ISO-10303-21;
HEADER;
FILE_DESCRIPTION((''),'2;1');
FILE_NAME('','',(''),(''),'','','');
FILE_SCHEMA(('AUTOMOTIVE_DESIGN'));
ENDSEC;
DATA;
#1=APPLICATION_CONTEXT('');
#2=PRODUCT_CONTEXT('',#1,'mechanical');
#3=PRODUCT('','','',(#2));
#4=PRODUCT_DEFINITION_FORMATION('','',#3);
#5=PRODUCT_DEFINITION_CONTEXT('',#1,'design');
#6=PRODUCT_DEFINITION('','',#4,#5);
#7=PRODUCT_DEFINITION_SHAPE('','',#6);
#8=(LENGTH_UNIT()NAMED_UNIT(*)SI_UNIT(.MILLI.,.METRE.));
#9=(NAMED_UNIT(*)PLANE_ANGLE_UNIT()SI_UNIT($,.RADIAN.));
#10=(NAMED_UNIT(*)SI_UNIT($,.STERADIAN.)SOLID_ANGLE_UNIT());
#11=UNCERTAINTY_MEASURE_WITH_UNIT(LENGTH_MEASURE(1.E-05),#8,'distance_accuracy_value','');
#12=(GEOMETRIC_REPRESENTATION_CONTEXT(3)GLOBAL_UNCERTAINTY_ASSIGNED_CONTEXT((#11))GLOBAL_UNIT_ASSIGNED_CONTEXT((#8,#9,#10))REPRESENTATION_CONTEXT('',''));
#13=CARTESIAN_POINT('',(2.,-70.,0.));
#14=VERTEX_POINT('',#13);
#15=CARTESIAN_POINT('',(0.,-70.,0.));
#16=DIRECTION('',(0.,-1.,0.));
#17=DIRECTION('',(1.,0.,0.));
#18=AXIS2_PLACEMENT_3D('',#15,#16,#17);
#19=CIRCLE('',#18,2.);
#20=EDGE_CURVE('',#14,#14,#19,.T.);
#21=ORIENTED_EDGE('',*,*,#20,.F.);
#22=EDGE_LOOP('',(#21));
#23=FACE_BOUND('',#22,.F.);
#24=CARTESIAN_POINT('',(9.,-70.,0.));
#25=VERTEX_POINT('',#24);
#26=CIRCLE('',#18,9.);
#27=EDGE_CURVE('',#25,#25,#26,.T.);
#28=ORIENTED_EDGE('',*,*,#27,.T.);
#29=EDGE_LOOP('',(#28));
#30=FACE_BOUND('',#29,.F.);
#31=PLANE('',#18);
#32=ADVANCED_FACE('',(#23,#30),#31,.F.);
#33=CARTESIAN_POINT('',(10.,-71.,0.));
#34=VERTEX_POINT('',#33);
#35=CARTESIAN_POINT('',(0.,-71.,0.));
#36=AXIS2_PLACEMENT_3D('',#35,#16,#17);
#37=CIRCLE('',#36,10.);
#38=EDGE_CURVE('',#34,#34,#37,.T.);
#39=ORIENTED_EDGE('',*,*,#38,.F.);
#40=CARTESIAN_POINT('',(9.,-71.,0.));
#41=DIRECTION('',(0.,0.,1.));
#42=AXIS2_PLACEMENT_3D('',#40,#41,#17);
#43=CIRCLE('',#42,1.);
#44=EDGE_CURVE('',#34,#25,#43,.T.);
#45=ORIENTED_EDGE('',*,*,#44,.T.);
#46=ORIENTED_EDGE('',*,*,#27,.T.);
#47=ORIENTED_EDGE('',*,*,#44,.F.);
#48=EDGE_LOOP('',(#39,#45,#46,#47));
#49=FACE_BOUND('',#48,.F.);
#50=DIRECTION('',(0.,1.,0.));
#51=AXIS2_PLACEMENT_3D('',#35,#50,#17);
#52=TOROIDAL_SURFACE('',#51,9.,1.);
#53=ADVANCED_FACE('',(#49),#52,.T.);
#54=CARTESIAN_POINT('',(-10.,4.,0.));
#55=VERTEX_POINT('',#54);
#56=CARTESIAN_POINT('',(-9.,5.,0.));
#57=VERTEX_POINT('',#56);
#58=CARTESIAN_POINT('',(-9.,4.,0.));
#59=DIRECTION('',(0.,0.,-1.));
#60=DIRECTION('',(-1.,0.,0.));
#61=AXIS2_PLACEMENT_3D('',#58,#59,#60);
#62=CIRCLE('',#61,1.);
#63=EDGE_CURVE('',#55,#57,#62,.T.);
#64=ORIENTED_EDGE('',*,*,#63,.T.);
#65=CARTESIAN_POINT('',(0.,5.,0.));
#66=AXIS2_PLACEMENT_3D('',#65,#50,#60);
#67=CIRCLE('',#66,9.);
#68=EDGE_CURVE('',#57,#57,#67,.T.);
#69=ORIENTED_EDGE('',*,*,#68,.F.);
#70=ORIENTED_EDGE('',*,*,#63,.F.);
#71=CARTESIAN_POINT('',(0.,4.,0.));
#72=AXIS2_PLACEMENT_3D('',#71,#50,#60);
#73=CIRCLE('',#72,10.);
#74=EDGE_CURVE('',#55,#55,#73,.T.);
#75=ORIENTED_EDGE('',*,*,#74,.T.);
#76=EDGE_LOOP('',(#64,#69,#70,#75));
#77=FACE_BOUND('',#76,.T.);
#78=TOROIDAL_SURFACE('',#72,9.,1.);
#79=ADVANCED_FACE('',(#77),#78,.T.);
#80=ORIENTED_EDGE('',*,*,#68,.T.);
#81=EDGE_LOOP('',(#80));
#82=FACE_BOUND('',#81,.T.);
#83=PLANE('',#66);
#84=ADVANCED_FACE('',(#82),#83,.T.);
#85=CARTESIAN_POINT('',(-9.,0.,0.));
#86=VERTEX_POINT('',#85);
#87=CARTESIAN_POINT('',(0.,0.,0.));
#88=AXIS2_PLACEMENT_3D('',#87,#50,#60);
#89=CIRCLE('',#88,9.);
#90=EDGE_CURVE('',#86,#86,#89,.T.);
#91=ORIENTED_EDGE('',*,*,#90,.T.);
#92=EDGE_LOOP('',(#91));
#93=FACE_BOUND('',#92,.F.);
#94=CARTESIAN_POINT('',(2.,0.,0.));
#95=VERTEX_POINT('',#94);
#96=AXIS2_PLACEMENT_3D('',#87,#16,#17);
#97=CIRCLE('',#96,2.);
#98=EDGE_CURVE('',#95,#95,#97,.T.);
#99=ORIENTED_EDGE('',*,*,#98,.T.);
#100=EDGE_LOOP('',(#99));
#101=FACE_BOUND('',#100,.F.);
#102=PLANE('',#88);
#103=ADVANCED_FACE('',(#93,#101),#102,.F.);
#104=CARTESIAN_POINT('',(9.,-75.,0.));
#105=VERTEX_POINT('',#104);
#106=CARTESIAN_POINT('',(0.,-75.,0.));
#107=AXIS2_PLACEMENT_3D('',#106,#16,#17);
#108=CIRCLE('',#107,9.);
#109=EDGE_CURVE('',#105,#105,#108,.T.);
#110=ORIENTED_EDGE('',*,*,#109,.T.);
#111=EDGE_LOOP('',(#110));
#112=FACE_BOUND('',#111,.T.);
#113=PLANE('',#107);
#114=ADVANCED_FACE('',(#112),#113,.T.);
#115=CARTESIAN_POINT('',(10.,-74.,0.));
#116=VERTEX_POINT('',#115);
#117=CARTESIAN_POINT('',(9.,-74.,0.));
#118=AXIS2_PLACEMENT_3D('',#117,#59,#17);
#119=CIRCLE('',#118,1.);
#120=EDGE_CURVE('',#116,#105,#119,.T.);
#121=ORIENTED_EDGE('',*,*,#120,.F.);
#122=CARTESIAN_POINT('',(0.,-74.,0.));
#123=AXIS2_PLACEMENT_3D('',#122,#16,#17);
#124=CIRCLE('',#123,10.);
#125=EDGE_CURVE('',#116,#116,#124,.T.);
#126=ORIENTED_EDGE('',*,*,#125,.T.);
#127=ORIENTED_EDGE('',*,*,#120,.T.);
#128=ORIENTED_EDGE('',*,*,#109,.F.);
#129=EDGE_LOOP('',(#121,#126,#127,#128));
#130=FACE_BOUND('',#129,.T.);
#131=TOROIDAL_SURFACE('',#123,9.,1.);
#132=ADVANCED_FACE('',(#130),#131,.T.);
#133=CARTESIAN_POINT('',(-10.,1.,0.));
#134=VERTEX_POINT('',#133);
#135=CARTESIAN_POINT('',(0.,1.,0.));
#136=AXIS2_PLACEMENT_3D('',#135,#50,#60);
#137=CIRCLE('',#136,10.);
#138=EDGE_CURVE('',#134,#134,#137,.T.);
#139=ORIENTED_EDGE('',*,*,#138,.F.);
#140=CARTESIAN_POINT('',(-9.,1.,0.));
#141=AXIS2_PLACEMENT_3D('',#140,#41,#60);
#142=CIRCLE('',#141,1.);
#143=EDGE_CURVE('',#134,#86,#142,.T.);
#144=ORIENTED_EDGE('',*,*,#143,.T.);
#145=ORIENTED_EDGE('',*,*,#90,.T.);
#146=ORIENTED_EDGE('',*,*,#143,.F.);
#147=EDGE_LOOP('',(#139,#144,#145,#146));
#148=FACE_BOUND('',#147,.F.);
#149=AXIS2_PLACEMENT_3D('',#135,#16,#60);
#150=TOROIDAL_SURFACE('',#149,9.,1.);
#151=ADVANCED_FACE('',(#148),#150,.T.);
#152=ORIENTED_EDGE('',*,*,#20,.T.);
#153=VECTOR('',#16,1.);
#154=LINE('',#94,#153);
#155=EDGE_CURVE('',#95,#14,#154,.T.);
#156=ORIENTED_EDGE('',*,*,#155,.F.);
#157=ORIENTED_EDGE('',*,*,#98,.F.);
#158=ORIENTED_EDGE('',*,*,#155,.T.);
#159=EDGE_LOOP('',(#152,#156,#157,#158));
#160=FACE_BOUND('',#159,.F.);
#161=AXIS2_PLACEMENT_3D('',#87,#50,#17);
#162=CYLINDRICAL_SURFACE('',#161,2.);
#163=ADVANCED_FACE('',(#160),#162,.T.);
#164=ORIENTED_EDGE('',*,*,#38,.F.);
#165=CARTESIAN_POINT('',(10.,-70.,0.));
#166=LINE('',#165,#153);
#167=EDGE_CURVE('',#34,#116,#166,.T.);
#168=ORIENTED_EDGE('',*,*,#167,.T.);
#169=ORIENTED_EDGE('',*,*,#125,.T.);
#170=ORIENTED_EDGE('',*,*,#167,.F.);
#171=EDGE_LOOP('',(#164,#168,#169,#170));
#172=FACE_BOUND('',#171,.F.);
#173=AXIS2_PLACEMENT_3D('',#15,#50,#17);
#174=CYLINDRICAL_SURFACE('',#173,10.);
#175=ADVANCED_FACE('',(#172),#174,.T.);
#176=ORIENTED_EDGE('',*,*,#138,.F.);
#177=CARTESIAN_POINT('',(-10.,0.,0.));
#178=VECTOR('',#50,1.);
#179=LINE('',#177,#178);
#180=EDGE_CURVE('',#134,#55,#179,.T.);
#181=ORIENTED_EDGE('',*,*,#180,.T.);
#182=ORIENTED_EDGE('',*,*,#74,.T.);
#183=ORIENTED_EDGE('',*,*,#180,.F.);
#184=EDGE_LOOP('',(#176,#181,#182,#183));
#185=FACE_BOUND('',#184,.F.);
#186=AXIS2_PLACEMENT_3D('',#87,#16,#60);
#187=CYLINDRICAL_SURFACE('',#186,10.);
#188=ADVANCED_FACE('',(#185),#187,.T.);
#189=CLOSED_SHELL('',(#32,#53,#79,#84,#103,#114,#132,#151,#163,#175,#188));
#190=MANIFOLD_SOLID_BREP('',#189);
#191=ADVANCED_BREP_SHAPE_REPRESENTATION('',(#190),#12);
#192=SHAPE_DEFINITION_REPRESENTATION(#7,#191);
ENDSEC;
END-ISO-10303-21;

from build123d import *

# Parameters (mm, degrees)
F0_R     = 2
F1_DEPTH = 70
F2_R     = 10
F3_DEPTH = 5
F4_R     = 1
F5_R     = 10
F5_R_2   = 2
F6_DEPTH = 5
F7_R     = 1


# Not quite as in the source:
# - a feature names something its author has since deleted; it is built from what else it names


with BuildPart() as f1:
    # F0 (on Front) → F1 (new body)
    with BuildSketch(Plane.XZ):
        Circle(F0_R)
    extrude(amount=F1_DEPTH)

    # F2 (on face) → F3 (join)
    with BuildSketch(Plane.XZ.offset(70)):
        Circle(F2_R)
    extrude(amount=F3_DEPTH)

    # F4
    f4_edges = [f1.edges().sort_by_distance(p)[0] for p in [
        (-10, -70, 0),
        (-10, -75, 0),
    ]]
    fillet(f4_edges, radius=F4_R)

    # F5 (on face) → F6 (join)
    with BuildSketch(Plane(origin=(0, 0, 0), x_dir=(-1, 0, 0), z_dir=(0, 1, 0))):
        Circle(F5_R)
        Circle(F5_R_2, mode=Mode.SUBTRACT)
        Circle(F5_R_2)
    extrude(amount=F6_DEPTH)

    # F7
    f7_edges = [f1.edges().sort_by_distance(p)[0] for p in [
        (10, 0, 0),
        (10, 5, 0),
    ]]
    fillet(f7_edges, radius=F7_R)


solid = f1.part
